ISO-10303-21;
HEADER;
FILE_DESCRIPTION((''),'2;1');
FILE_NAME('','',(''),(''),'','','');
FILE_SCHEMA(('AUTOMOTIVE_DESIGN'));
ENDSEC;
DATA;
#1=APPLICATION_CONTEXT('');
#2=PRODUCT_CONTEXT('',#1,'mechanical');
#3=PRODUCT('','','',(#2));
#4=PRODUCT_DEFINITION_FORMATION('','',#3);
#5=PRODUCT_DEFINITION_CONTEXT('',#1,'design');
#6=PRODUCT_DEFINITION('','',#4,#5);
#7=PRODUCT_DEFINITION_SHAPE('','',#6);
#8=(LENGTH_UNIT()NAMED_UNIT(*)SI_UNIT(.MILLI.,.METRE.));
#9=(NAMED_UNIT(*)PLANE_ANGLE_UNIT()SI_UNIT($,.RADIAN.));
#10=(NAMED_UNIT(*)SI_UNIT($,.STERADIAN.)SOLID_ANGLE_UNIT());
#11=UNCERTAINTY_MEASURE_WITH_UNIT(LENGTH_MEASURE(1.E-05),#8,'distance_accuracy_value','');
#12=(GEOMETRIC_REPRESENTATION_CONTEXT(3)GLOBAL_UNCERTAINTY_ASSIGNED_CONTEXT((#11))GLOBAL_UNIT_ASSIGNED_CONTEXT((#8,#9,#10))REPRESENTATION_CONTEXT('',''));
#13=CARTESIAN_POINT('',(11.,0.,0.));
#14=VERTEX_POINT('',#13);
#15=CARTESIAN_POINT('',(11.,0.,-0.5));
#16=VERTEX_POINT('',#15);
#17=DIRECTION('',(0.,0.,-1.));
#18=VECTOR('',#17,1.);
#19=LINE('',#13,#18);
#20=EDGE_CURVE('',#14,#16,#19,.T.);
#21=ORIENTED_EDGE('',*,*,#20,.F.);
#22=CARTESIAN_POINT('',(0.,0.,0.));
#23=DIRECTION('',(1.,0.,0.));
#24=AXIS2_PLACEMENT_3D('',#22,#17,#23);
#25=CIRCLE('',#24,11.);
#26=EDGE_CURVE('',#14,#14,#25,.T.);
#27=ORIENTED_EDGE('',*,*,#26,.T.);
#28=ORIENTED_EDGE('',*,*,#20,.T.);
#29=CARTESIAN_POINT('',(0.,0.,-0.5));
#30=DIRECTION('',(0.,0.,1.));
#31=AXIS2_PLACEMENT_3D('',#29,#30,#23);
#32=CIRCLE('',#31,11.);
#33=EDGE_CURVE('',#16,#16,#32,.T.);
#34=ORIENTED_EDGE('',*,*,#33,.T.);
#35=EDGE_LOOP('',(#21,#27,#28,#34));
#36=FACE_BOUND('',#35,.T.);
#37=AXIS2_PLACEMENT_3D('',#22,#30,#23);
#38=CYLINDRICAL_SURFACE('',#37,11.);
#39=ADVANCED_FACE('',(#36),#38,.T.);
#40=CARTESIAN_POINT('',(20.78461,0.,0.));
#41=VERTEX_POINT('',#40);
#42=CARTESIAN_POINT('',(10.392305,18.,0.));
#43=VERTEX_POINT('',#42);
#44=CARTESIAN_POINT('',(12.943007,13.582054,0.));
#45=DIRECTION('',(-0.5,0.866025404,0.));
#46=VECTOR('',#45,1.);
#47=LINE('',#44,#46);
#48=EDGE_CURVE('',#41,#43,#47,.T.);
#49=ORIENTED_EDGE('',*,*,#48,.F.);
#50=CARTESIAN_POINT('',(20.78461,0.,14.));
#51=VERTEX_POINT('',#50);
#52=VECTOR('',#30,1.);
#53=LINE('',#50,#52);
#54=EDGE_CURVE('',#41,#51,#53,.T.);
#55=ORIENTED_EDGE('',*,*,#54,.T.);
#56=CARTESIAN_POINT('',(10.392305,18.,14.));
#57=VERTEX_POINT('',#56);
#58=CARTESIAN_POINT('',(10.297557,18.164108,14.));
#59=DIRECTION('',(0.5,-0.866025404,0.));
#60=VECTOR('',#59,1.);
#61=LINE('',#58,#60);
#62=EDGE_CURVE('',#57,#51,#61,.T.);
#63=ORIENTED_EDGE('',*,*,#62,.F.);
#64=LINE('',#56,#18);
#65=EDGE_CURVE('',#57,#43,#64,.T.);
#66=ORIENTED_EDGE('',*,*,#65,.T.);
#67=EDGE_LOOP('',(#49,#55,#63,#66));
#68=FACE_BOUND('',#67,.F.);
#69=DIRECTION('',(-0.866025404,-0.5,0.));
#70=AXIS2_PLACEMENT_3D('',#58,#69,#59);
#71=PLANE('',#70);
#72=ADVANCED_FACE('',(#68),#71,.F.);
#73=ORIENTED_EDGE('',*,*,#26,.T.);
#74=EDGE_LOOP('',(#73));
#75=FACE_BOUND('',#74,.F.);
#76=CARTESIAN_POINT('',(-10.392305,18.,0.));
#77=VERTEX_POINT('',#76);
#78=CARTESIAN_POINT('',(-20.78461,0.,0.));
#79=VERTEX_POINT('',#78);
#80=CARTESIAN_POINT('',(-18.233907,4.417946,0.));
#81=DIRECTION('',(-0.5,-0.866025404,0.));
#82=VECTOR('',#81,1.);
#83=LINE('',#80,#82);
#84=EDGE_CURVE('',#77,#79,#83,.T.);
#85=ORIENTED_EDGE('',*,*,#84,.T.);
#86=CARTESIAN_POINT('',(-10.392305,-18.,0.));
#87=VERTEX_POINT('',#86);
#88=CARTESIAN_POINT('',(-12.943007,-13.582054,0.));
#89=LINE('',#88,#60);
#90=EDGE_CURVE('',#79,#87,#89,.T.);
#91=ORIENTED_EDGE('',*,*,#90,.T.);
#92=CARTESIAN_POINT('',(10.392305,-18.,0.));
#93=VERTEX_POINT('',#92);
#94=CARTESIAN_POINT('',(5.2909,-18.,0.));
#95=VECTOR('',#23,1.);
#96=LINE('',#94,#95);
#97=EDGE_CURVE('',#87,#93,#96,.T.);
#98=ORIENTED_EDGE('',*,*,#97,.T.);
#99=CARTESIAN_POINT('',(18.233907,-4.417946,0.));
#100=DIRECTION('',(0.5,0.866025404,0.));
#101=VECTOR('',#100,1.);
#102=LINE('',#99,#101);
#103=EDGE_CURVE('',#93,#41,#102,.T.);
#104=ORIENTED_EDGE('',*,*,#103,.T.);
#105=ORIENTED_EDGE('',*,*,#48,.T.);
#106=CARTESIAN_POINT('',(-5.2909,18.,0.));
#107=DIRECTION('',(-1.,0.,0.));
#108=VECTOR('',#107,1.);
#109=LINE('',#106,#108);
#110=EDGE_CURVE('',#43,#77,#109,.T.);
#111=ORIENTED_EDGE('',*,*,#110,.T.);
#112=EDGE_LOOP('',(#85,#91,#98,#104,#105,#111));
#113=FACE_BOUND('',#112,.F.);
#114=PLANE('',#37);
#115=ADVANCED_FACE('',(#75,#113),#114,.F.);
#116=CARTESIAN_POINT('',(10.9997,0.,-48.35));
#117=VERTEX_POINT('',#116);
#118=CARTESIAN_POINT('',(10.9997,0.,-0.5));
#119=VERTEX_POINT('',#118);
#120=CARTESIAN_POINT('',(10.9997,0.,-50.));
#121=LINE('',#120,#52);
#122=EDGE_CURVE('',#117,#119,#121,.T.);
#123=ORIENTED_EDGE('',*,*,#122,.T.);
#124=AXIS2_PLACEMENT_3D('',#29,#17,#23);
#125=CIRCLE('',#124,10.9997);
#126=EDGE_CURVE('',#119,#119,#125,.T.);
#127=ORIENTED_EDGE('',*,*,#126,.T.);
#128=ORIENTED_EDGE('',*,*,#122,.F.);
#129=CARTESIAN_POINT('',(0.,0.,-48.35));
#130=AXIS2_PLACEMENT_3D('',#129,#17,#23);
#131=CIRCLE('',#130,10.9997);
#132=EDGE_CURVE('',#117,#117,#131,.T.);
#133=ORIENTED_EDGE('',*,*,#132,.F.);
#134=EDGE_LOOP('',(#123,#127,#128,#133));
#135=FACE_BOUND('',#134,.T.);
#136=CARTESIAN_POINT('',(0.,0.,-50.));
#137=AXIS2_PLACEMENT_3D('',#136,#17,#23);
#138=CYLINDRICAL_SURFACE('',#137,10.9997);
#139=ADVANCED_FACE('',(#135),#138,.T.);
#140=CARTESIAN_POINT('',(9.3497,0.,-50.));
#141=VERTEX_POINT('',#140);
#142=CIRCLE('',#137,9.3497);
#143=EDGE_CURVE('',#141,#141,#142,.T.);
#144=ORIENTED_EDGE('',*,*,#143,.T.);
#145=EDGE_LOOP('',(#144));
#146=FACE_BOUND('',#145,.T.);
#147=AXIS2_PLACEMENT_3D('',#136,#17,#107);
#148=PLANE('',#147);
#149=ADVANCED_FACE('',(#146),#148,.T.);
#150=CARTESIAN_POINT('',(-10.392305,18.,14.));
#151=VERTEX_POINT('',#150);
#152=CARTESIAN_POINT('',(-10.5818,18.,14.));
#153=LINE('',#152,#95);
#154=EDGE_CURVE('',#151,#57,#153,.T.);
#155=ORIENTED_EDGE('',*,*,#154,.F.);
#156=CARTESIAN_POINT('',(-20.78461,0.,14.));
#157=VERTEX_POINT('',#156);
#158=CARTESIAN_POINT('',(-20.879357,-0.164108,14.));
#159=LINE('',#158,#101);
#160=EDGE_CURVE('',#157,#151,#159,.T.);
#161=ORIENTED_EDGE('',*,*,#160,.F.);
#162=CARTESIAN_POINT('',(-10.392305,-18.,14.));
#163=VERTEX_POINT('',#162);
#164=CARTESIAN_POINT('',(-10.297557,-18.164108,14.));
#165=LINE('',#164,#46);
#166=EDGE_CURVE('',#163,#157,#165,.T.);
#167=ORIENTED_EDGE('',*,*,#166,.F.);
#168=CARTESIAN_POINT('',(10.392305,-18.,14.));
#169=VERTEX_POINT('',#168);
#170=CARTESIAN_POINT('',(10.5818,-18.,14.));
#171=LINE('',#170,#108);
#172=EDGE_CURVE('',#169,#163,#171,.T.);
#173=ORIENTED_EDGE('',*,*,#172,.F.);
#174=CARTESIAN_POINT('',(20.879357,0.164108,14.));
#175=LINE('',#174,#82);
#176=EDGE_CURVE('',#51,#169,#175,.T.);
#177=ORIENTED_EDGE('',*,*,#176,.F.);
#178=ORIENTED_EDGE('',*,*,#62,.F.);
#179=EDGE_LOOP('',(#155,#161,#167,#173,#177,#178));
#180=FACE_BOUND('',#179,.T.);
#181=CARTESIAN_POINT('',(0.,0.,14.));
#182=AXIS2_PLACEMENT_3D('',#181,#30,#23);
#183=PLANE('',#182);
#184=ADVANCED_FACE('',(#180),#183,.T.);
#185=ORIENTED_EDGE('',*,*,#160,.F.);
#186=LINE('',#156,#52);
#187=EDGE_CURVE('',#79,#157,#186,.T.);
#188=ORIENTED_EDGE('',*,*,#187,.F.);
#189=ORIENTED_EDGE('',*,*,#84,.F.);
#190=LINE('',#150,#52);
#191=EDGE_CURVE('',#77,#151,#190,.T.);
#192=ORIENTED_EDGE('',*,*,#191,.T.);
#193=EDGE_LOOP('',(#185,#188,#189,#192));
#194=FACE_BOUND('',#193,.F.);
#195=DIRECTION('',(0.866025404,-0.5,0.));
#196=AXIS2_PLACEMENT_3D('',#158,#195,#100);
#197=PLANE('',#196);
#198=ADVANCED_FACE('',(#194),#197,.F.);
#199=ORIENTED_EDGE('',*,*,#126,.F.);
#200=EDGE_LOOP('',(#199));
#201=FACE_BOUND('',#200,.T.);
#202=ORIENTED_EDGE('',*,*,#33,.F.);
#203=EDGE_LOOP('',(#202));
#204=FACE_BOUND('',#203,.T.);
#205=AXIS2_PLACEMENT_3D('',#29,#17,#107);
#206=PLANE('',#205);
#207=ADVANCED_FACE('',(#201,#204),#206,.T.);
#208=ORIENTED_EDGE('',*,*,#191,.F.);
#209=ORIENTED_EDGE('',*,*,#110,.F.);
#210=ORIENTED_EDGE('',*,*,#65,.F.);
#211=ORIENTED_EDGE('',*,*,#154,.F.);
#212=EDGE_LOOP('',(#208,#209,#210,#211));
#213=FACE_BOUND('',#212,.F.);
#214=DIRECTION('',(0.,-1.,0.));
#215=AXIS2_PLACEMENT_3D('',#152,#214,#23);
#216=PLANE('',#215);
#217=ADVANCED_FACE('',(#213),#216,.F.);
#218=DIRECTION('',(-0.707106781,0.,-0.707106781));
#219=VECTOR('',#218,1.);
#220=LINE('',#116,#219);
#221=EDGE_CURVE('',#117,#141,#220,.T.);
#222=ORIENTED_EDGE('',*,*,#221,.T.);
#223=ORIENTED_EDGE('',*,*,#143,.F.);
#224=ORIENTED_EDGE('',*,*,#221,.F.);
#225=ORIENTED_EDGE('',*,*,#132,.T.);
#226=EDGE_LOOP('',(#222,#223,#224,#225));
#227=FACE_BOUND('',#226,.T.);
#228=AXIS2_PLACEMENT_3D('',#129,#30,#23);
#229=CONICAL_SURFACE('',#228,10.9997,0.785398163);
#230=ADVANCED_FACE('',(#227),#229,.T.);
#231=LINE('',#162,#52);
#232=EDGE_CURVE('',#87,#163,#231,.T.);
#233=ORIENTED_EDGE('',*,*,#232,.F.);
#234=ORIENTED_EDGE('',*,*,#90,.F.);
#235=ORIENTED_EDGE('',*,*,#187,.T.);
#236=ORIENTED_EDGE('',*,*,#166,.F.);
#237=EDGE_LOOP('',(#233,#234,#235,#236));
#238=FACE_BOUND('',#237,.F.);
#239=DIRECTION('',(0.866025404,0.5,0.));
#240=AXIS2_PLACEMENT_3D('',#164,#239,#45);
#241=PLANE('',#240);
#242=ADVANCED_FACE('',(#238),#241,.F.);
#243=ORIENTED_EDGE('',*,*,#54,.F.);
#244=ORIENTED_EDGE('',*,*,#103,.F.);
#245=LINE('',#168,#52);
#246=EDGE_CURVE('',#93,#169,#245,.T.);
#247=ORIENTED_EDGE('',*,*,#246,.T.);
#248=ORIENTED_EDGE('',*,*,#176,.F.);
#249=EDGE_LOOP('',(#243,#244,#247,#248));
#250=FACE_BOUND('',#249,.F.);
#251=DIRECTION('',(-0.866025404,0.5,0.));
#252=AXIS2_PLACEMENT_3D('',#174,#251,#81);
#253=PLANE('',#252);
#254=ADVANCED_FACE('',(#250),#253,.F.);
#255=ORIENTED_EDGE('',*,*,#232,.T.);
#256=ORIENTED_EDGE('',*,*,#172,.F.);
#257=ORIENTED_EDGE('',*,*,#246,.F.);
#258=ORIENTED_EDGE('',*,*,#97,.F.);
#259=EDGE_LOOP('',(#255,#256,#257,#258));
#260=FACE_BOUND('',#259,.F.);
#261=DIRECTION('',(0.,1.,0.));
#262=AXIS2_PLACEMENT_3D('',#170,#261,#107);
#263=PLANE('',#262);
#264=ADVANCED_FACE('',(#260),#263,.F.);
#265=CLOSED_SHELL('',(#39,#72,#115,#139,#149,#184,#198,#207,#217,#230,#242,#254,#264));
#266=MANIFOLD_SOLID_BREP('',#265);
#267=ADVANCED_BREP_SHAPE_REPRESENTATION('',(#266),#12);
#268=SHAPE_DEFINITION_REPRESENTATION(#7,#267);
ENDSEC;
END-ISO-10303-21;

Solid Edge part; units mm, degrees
sketch "Sketch1" plane through (0, 0, 0) normal (0, 0, 1) x (1, 0, 0)
  circle A0 centre (0, 0) radius 20.88
  dimension "D1" = 41.76
extrude "Protrusion1" add sketch "Sketch1" along normal blind 14
sketch "Sketch2" plane through (0, 0, 0) normal (0, 0, -1) x (1, 0, 0)
  circle A0 centre (0, 0) radius 11
extrude "Protrusion2" add sketch "Sketch2" along normal blind 50
sketch "Sketch3" plane through (0, 0, -50) normal (0, 0, -1) x (1, 0, 0)
  circle A0 centre (0, 0) radius 10.9997
extrude "Cutout1" cut sketch "Sketch3" against normal blind 49.5 flip side to cut
chamfer "Chamfer_1" distance 1.65 angle 45 1 edges at (-10.9997, 0, -50)
sketch "Sketch4" plane through (0, 0, 14) normal (0, 0, 1) x (1, 0, 0)
  line L0 (-10.5818, 18) -> (10.5818, 18)
  dimension "D1" = 36
extrude "Cutout2" cut sketch "Sketch4" against normal up to next material side at (0, 18.05, 14)
pattern_circular "Pattern1" count 6 over 360 about axis through (0, 0, 14) along (0, 0, 1) of "Cutout2"
properties part number "200081"
